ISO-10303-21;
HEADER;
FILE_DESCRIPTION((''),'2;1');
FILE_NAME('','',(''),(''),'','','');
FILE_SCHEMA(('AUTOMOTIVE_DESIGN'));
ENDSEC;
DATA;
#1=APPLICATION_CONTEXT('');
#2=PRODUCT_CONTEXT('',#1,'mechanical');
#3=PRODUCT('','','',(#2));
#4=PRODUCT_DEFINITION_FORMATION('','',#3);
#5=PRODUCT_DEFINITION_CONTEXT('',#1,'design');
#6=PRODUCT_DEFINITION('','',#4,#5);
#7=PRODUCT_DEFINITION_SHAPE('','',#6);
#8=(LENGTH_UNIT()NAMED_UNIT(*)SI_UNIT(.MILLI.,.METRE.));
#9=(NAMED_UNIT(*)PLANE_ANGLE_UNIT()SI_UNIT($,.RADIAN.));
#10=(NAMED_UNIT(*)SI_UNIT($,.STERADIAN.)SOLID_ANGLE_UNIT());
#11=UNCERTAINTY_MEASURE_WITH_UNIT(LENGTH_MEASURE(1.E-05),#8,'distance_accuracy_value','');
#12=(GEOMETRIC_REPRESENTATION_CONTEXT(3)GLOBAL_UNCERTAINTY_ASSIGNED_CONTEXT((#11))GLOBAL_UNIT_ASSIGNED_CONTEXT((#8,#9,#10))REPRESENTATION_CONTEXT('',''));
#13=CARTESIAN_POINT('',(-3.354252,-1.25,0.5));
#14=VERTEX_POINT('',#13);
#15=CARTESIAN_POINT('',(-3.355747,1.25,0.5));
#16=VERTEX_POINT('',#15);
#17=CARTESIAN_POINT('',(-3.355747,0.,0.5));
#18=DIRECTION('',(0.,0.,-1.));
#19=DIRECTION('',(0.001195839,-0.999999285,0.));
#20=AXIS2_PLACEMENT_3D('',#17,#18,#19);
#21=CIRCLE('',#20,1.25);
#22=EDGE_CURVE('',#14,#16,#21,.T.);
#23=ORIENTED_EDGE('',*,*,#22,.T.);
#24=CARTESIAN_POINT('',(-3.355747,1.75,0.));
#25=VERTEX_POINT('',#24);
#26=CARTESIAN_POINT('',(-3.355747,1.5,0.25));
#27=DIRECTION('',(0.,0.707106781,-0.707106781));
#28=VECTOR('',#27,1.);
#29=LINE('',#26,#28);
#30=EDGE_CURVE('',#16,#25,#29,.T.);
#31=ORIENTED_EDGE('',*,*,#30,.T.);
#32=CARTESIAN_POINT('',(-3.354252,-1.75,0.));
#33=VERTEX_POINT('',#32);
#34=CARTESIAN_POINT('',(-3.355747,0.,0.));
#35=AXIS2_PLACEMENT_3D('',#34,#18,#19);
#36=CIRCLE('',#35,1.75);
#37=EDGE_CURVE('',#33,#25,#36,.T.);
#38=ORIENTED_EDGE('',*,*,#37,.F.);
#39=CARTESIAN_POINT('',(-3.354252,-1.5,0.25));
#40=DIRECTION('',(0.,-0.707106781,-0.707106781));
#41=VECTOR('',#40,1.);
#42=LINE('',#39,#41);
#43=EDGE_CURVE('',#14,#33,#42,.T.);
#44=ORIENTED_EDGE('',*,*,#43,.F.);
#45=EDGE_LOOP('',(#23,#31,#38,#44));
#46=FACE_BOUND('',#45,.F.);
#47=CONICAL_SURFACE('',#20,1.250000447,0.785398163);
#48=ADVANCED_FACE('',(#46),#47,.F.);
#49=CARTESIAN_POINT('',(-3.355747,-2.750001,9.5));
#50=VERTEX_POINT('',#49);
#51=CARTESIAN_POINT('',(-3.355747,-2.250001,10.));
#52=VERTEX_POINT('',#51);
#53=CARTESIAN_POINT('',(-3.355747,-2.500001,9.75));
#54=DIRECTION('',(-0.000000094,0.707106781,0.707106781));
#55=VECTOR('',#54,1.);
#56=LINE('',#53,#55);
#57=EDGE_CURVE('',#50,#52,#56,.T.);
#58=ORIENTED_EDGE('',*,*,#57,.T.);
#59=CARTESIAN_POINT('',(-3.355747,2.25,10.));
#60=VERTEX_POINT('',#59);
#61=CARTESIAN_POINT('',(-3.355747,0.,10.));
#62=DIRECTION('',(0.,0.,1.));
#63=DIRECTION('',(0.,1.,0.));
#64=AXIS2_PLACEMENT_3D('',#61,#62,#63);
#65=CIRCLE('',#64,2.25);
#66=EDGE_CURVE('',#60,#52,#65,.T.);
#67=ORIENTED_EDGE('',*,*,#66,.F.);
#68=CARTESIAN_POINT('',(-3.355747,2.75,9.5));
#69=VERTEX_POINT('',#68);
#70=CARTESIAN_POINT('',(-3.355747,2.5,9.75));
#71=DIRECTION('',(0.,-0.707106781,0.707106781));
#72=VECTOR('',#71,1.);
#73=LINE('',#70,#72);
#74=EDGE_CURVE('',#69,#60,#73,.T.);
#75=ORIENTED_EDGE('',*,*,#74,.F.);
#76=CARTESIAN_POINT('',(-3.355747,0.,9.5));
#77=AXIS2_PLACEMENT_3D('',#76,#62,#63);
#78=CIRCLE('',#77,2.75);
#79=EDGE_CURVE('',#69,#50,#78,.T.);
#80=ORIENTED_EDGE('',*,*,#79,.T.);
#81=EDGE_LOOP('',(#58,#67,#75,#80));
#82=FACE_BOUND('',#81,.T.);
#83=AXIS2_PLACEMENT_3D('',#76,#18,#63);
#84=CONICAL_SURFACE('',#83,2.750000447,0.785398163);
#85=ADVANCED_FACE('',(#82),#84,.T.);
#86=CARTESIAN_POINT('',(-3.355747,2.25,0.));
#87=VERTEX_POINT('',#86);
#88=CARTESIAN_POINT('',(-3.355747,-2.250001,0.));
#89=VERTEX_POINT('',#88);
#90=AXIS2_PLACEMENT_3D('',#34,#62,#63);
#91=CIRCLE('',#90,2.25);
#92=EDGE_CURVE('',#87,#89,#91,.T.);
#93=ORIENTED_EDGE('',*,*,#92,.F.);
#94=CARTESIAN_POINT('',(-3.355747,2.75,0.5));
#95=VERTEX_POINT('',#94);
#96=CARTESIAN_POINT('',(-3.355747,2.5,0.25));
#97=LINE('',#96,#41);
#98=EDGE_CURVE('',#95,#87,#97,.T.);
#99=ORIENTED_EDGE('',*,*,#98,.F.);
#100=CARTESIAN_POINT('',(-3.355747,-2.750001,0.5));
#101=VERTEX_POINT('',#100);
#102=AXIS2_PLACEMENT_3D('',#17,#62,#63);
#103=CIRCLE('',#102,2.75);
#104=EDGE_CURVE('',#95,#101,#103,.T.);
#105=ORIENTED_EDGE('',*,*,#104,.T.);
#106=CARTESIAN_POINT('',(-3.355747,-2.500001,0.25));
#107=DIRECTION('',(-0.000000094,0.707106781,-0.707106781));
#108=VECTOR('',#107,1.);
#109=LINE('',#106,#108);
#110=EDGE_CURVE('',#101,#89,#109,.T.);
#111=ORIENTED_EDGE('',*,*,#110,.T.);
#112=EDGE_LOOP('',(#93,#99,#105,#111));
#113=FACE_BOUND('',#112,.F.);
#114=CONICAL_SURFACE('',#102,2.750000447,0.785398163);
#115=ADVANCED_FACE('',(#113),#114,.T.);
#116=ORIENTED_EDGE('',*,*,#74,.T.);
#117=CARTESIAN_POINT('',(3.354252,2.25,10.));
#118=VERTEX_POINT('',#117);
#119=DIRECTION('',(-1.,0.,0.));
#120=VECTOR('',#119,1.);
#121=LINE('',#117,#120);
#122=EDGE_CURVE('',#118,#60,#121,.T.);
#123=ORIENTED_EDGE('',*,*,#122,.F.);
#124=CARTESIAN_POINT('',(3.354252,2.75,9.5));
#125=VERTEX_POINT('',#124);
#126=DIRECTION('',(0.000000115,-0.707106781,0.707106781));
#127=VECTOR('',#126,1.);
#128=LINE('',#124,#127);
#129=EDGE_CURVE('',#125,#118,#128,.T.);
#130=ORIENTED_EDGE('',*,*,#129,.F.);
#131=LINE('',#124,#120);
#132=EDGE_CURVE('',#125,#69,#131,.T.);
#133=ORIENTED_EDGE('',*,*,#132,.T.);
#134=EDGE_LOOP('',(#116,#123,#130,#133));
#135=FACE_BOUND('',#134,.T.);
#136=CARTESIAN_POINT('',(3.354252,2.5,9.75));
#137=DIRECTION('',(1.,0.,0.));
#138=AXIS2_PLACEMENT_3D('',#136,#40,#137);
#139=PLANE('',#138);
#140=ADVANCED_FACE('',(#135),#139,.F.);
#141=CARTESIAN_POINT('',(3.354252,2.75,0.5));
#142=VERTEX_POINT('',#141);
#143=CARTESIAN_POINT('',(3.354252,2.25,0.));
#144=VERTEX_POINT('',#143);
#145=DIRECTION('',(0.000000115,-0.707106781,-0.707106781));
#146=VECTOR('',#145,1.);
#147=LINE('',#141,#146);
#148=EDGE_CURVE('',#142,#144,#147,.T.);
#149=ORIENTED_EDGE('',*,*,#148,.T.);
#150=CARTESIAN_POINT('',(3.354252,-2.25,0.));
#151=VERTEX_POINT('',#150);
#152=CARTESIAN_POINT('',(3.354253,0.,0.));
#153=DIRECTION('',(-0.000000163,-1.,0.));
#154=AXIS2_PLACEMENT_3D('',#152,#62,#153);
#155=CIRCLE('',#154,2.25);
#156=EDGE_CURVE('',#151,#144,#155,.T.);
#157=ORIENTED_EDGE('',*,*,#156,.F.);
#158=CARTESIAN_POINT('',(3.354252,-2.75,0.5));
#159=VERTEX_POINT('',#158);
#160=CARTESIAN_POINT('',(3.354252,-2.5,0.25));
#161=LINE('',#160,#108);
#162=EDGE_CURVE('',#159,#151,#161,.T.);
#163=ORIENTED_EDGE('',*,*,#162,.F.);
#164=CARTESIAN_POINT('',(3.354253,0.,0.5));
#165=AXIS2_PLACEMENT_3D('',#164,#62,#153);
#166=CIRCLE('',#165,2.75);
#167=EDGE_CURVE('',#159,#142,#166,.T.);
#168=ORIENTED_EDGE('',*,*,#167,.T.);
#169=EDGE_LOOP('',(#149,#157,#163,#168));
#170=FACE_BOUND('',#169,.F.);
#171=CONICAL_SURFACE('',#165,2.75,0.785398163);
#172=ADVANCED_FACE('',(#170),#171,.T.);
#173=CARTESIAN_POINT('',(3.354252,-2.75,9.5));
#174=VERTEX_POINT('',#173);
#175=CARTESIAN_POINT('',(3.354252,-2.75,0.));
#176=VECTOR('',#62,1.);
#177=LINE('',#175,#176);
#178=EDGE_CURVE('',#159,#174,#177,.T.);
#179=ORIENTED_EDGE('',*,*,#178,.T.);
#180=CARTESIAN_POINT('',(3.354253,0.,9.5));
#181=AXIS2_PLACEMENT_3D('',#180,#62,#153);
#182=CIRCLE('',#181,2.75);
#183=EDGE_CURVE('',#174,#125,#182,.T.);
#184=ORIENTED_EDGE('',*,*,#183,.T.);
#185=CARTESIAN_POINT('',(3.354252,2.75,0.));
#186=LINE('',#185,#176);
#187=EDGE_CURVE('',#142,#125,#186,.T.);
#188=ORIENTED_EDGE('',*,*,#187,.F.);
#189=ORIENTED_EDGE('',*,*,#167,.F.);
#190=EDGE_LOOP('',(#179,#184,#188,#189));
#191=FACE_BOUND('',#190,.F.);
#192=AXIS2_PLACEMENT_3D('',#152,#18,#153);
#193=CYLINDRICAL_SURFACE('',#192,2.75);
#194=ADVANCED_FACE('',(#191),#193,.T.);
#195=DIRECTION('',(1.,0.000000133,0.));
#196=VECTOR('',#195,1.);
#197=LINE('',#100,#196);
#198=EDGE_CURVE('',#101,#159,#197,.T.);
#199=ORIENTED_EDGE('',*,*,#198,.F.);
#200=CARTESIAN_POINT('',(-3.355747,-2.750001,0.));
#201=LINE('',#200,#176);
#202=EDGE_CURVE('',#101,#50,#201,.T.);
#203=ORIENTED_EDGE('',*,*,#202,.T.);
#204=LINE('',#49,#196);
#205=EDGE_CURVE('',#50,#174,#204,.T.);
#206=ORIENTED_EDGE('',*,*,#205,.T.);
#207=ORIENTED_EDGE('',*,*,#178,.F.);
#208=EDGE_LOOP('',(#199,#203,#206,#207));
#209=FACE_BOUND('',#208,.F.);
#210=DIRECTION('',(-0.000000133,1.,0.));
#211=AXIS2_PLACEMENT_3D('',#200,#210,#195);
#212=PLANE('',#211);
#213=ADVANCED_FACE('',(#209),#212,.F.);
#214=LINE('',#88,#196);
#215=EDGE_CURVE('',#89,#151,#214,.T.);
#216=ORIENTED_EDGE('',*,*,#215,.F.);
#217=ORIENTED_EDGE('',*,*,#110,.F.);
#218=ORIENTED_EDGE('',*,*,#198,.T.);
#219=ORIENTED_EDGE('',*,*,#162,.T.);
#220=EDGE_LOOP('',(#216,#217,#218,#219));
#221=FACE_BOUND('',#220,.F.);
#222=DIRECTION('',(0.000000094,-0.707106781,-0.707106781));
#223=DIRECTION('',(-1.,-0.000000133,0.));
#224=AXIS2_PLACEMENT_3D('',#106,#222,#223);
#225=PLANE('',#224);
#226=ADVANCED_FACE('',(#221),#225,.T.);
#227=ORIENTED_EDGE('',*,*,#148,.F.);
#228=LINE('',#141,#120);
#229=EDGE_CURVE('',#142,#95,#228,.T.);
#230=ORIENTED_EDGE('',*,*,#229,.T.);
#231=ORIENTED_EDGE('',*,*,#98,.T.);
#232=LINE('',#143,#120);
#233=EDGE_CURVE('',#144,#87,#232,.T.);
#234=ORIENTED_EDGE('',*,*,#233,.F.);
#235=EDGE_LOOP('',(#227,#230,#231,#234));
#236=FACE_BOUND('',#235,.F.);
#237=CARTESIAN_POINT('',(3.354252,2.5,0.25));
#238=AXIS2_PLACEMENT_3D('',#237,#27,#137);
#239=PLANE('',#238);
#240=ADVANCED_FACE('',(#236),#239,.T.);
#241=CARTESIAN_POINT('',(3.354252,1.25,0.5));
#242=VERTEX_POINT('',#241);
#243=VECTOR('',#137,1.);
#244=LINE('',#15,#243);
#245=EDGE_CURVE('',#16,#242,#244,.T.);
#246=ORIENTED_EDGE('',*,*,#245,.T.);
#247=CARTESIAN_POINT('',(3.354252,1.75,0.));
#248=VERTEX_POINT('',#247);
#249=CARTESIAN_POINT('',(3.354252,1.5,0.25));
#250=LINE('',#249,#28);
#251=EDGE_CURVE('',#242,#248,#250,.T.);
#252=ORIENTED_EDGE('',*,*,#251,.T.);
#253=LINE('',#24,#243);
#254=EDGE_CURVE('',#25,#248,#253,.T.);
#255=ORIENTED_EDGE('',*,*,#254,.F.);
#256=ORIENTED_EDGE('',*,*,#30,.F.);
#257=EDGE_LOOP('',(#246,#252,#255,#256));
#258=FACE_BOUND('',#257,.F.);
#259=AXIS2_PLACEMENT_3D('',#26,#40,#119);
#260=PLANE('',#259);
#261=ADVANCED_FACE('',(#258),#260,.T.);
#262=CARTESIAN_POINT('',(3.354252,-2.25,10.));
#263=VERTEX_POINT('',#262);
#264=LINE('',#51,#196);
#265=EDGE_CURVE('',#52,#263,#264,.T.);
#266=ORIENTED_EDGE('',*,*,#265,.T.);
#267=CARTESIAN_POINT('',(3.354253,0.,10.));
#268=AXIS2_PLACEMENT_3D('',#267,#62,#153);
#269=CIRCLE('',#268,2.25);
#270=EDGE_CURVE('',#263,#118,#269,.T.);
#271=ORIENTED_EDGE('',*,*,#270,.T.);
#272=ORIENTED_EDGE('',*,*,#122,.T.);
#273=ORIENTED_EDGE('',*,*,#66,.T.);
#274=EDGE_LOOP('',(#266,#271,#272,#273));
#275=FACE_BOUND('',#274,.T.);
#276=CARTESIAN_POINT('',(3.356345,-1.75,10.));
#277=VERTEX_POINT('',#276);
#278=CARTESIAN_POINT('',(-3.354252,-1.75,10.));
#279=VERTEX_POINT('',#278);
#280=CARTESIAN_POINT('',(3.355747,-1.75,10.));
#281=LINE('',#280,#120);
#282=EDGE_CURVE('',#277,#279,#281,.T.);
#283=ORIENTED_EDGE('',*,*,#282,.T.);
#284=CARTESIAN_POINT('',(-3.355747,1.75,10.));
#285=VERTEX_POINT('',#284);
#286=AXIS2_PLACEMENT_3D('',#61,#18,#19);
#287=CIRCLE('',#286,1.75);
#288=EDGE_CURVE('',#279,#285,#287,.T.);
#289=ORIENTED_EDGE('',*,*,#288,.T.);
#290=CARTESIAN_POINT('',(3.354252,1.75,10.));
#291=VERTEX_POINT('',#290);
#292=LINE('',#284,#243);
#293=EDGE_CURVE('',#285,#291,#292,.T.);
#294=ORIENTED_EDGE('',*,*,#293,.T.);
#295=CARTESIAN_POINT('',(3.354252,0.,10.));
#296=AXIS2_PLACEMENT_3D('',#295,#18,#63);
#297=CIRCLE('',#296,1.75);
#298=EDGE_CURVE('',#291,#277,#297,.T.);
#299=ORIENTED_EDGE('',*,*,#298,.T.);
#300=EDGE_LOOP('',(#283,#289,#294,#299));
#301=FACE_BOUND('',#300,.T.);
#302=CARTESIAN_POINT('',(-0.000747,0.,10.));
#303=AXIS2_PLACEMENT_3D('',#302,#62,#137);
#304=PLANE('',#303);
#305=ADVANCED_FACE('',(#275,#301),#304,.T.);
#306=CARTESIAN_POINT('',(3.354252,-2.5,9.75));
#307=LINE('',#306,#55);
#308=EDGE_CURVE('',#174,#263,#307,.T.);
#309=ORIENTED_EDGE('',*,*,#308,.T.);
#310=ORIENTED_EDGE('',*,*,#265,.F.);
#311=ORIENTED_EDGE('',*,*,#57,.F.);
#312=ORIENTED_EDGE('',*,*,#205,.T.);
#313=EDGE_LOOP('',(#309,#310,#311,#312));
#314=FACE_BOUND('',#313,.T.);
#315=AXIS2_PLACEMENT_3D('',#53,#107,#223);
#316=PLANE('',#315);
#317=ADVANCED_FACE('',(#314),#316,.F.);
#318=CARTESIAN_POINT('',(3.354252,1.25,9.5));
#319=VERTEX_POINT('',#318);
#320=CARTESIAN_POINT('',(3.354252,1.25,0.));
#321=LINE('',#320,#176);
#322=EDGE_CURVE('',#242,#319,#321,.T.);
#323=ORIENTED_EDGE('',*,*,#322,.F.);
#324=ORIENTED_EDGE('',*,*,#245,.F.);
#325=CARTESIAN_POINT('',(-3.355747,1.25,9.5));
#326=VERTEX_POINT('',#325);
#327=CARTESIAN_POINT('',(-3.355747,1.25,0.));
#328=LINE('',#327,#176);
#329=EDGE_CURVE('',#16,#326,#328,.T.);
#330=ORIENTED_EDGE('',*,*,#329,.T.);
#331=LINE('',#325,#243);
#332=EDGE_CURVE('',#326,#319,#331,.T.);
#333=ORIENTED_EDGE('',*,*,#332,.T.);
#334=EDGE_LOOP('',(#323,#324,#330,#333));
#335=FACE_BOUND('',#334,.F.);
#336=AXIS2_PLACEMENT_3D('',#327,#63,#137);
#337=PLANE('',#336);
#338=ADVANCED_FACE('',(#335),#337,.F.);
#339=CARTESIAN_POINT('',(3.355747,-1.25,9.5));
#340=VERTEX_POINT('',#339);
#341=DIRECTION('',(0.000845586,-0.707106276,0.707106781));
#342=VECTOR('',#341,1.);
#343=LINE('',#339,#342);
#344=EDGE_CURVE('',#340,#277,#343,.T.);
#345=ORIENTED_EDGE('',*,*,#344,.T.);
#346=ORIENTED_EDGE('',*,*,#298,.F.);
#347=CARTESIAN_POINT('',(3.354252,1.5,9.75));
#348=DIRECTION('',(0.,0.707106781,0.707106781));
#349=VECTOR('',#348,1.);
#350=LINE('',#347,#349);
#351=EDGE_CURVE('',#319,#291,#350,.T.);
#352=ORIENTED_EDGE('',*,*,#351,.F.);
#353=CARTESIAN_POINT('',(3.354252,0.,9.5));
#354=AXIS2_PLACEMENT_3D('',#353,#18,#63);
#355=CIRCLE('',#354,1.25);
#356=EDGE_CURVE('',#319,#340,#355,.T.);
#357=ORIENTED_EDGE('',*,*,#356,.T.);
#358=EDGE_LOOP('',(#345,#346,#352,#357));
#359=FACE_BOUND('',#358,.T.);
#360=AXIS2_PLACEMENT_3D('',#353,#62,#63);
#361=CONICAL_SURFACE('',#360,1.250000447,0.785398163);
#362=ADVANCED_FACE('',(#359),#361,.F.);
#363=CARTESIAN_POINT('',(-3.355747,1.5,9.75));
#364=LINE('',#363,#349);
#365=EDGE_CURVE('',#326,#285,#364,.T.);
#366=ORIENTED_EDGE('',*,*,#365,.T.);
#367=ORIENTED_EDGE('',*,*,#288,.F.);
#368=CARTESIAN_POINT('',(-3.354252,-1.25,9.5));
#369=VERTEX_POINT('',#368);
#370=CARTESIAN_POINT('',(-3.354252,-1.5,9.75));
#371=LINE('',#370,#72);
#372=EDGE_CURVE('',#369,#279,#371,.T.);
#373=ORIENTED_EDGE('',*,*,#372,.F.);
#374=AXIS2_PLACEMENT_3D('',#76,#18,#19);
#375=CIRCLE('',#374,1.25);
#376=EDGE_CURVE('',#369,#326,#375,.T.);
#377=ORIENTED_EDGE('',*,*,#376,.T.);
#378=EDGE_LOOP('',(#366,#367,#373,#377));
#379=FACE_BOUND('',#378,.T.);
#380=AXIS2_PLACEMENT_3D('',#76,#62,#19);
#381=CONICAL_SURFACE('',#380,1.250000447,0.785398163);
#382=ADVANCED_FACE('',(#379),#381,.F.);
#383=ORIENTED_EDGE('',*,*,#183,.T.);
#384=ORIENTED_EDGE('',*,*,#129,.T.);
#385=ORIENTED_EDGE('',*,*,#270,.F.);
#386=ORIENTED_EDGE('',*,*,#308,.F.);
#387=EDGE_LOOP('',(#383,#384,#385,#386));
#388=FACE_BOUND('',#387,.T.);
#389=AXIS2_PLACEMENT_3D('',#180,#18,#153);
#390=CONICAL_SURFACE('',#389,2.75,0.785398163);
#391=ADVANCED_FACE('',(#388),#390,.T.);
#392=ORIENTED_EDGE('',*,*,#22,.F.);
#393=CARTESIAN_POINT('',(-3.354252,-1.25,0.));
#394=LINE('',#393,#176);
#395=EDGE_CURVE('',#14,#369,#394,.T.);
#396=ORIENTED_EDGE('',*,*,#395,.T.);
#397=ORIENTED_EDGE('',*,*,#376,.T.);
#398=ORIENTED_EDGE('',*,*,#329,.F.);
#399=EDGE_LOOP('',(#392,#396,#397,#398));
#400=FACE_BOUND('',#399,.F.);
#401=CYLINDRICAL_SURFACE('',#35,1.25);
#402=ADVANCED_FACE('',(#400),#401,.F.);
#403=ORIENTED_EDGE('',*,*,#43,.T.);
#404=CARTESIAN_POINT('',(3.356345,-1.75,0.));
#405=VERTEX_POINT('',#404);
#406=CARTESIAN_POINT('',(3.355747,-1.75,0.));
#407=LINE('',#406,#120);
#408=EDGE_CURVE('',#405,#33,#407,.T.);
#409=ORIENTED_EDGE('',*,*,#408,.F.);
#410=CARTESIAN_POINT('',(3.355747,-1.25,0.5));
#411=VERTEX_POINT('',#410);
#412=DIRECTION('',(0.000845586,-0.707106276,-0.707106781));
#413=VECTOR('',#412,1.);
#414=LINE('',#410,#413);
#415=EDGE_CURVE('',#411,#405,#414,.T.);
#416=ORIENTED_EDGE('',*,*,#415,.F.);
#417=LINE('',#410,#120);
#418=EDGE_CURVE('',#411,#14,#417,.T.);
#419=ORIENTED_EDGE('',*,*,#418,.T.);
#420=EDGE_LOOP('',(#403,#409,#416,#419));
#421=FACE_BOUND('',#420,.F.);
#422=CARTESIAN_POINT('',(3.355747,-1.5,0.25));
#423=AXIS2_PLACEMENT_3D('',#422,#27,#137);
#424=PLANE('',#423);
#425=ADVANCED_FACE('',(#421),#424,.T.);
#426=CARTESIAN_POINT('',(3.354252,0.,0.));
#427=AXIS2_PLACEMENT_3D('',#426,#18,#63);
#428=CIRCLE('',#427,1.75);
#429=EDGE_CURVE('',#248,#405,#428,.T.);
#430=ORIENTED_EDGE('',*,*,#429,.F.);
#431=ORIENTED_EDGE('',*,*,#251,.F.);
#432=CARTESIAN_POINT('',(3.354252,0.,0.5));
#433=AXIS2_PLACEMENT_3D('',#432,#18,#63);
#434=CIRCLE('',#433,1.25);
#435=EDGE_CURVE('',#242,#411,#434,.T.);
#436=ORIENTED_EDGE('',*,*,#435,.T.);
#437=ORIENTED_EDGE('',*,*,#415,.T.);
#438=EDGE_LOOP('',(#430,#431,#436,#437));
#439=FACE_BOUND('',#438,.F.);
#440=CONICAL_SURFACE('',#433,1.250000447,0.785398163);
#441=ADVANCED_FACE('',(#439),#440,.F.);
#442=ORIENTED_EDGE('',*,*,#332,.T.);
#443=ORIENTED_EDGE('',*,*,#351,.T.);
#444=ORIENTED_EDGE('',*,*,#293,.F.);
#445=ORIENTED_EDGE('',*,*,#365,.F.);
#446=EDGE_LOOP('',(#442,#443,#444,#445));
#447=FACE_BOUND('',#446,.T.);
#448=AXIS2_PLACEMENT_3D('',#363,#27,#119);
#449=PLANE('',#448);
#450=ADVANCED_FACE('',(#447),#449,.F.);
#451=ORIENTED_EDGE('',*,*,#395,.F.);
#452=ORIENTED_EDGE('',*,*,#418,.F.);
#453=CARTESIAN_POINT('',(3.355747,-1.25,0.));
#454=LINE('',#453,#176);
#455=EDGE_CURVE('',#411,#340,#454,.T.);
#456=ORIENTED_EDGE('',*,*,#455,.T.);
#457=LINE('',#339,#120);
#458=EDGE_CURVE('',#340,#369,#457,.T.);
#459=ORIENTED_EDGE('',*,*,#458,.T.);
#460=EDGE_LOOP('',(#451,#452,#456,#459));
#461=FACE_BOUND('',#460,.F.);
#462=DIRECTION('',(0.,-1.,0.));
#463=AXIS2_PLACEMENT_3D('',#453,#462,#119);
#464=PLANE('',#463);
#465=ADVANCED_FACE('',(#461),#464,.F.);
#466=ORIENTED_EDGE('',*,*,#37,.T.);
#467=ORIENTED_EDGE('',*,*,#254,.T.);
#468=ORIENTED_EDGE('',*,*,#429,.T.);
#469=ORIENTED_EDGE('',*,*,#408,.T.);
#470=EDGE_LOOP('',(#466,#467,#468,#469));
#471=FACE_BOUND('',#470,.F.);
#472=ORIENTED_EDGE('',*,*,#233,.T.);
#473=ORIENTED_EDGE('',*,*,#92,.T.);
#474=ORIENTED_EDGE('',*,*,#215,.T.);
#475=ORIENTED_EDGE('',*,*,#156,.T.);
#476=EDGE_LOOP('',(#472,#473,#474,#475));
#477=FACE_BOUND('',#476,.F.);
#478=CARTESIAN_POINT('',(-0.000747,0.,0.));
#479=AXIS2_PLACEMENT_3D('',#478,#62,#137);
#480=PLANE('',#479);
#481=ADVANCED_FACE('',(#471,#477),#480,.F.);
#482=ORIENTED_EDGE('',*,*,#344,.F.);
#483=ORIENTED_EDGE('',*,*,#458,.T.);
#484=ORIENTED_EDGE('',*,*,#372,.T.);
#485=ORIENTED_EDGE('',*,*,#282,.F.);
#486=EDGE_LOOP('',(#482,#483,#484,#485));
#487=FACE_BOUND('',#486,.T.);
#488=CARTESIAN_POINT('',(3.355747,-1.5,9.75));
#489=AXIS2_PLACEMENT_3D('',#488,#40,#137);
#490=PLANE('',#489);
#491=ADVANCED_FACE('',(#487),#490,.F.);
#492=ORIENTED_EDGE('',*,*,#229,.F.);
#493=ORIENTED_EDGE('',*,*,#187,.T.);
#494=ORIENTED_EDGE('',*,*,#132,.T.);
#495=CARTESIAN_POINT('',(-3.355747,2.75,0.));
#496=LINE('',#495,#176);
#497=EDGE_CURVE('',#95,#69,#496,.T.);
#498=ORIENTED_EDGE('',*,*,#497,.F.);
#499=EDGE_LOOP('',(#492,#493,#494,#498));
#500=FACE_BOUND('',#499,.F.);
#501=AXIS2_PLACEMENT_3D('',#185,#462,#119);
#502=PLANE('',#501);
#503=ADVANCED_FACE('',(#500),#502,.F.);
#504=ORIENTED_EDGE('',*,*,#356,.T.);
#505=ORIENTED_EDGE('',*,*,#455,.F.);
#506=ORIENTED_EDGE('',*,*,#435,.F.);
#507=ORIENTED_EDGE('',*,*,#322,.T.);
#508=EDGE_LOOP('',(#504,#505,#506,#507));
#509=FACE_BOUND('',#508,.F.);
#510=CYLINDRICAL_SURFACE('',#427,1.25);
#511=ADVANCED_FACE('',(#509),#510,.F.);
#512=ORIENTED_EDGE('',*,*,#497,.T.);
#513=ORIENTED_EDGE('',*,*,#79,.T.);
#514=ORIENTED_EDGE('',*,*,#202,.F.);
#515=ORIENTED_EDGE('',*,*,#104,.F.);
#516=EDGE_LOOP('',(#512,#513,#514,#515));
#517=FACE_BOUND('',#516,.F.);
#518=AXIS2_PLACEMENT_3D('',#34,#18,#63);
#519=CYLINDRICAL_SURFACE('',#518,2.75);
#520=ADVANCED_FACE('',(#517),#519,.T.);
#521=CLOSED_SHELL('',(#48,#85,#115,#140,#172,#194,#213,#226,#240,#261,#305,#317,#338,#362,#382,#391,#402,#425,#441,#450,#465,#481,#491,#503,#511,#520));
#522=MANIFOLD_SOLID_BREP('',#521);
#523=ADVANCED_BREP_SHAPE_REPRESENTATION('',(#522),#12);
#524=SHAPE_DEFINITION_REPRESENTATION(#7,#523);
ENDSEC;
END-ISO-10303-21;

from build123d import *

# Parameters (mm, degrees)
F1_DEPTH = 10
F2_SIZE  = 0.5


# Not quite as in the source:
# - ends of sketch curves that miss each other by under 0.0002 mm in the source are joined


with BuildPart() as f1:
    # F0 (on Top) → F1 (new body)
    with BuildSketch(Plane.XY):
        with BuildLine():
            Line((3.3542521534, 2.75), (-3.3557469528, 2.75))
            ThreePointArc((-3.3557469528, 2.75), (-6.1057473997, -4.469e-07), (-3.3557469528, -2.7500008938))
            Line((-3.3557469528, -2.7500008938), (3.3542521534, -2.75))
            ThreePointArc((3.3542521534, -2.75), (6.1042526003, -4.469e-07), (3.3542521534, 2.75))
        make_face()
        with BuildLine():
            Line((-3.3557469528, 1.25), (3.3542521534, 1.25))
            ThreePointArc((3.3542521534, 1.25), (4.6042523768, 0.000746953), (3.3557469528, -1.25))
            Line((3.3557469528, -1.25), (-3.3542521534, -1.25))
            ThreePointArc((-3.3542521534, -1.25), (-4.6057471763, -0.0007478467), (-3.3557469528, 1.25))
        make_face(mode=Mode.SUBTRACT)
    extrude(amount=F1_DEPTH)

    # F2
    f2_edges = [f1.edges().sort_by_distance(p)[0] for p in [
        (-0.000747, -2.75, 10),
        (6.104253, 0, 10),
        (-0.000747, 2.75, 10),
        (-6.105747, 0, 10),
        (-0.000747, 1.25, 10),
        (4.604252, 0.000747, 10),
        (0.000747, -1.25, 10),
        (-4.605747, -0.000748, 10),
        (-0.000747, -2.75, 0),
        (6.104253, 0, 0),
        (-0.000747, 2.75, 0),
        (-6.105747, 0, 0),
        (-0.000747, 1.25, 0),
        (4.604252, 0.000747, 0),
        (0.000747, -1.25, 0),
        (-4.605747, -0.000748, 0),
    ]]
    chamfer(f2_edges, length=F2_SIZE)


solid = f1.part
